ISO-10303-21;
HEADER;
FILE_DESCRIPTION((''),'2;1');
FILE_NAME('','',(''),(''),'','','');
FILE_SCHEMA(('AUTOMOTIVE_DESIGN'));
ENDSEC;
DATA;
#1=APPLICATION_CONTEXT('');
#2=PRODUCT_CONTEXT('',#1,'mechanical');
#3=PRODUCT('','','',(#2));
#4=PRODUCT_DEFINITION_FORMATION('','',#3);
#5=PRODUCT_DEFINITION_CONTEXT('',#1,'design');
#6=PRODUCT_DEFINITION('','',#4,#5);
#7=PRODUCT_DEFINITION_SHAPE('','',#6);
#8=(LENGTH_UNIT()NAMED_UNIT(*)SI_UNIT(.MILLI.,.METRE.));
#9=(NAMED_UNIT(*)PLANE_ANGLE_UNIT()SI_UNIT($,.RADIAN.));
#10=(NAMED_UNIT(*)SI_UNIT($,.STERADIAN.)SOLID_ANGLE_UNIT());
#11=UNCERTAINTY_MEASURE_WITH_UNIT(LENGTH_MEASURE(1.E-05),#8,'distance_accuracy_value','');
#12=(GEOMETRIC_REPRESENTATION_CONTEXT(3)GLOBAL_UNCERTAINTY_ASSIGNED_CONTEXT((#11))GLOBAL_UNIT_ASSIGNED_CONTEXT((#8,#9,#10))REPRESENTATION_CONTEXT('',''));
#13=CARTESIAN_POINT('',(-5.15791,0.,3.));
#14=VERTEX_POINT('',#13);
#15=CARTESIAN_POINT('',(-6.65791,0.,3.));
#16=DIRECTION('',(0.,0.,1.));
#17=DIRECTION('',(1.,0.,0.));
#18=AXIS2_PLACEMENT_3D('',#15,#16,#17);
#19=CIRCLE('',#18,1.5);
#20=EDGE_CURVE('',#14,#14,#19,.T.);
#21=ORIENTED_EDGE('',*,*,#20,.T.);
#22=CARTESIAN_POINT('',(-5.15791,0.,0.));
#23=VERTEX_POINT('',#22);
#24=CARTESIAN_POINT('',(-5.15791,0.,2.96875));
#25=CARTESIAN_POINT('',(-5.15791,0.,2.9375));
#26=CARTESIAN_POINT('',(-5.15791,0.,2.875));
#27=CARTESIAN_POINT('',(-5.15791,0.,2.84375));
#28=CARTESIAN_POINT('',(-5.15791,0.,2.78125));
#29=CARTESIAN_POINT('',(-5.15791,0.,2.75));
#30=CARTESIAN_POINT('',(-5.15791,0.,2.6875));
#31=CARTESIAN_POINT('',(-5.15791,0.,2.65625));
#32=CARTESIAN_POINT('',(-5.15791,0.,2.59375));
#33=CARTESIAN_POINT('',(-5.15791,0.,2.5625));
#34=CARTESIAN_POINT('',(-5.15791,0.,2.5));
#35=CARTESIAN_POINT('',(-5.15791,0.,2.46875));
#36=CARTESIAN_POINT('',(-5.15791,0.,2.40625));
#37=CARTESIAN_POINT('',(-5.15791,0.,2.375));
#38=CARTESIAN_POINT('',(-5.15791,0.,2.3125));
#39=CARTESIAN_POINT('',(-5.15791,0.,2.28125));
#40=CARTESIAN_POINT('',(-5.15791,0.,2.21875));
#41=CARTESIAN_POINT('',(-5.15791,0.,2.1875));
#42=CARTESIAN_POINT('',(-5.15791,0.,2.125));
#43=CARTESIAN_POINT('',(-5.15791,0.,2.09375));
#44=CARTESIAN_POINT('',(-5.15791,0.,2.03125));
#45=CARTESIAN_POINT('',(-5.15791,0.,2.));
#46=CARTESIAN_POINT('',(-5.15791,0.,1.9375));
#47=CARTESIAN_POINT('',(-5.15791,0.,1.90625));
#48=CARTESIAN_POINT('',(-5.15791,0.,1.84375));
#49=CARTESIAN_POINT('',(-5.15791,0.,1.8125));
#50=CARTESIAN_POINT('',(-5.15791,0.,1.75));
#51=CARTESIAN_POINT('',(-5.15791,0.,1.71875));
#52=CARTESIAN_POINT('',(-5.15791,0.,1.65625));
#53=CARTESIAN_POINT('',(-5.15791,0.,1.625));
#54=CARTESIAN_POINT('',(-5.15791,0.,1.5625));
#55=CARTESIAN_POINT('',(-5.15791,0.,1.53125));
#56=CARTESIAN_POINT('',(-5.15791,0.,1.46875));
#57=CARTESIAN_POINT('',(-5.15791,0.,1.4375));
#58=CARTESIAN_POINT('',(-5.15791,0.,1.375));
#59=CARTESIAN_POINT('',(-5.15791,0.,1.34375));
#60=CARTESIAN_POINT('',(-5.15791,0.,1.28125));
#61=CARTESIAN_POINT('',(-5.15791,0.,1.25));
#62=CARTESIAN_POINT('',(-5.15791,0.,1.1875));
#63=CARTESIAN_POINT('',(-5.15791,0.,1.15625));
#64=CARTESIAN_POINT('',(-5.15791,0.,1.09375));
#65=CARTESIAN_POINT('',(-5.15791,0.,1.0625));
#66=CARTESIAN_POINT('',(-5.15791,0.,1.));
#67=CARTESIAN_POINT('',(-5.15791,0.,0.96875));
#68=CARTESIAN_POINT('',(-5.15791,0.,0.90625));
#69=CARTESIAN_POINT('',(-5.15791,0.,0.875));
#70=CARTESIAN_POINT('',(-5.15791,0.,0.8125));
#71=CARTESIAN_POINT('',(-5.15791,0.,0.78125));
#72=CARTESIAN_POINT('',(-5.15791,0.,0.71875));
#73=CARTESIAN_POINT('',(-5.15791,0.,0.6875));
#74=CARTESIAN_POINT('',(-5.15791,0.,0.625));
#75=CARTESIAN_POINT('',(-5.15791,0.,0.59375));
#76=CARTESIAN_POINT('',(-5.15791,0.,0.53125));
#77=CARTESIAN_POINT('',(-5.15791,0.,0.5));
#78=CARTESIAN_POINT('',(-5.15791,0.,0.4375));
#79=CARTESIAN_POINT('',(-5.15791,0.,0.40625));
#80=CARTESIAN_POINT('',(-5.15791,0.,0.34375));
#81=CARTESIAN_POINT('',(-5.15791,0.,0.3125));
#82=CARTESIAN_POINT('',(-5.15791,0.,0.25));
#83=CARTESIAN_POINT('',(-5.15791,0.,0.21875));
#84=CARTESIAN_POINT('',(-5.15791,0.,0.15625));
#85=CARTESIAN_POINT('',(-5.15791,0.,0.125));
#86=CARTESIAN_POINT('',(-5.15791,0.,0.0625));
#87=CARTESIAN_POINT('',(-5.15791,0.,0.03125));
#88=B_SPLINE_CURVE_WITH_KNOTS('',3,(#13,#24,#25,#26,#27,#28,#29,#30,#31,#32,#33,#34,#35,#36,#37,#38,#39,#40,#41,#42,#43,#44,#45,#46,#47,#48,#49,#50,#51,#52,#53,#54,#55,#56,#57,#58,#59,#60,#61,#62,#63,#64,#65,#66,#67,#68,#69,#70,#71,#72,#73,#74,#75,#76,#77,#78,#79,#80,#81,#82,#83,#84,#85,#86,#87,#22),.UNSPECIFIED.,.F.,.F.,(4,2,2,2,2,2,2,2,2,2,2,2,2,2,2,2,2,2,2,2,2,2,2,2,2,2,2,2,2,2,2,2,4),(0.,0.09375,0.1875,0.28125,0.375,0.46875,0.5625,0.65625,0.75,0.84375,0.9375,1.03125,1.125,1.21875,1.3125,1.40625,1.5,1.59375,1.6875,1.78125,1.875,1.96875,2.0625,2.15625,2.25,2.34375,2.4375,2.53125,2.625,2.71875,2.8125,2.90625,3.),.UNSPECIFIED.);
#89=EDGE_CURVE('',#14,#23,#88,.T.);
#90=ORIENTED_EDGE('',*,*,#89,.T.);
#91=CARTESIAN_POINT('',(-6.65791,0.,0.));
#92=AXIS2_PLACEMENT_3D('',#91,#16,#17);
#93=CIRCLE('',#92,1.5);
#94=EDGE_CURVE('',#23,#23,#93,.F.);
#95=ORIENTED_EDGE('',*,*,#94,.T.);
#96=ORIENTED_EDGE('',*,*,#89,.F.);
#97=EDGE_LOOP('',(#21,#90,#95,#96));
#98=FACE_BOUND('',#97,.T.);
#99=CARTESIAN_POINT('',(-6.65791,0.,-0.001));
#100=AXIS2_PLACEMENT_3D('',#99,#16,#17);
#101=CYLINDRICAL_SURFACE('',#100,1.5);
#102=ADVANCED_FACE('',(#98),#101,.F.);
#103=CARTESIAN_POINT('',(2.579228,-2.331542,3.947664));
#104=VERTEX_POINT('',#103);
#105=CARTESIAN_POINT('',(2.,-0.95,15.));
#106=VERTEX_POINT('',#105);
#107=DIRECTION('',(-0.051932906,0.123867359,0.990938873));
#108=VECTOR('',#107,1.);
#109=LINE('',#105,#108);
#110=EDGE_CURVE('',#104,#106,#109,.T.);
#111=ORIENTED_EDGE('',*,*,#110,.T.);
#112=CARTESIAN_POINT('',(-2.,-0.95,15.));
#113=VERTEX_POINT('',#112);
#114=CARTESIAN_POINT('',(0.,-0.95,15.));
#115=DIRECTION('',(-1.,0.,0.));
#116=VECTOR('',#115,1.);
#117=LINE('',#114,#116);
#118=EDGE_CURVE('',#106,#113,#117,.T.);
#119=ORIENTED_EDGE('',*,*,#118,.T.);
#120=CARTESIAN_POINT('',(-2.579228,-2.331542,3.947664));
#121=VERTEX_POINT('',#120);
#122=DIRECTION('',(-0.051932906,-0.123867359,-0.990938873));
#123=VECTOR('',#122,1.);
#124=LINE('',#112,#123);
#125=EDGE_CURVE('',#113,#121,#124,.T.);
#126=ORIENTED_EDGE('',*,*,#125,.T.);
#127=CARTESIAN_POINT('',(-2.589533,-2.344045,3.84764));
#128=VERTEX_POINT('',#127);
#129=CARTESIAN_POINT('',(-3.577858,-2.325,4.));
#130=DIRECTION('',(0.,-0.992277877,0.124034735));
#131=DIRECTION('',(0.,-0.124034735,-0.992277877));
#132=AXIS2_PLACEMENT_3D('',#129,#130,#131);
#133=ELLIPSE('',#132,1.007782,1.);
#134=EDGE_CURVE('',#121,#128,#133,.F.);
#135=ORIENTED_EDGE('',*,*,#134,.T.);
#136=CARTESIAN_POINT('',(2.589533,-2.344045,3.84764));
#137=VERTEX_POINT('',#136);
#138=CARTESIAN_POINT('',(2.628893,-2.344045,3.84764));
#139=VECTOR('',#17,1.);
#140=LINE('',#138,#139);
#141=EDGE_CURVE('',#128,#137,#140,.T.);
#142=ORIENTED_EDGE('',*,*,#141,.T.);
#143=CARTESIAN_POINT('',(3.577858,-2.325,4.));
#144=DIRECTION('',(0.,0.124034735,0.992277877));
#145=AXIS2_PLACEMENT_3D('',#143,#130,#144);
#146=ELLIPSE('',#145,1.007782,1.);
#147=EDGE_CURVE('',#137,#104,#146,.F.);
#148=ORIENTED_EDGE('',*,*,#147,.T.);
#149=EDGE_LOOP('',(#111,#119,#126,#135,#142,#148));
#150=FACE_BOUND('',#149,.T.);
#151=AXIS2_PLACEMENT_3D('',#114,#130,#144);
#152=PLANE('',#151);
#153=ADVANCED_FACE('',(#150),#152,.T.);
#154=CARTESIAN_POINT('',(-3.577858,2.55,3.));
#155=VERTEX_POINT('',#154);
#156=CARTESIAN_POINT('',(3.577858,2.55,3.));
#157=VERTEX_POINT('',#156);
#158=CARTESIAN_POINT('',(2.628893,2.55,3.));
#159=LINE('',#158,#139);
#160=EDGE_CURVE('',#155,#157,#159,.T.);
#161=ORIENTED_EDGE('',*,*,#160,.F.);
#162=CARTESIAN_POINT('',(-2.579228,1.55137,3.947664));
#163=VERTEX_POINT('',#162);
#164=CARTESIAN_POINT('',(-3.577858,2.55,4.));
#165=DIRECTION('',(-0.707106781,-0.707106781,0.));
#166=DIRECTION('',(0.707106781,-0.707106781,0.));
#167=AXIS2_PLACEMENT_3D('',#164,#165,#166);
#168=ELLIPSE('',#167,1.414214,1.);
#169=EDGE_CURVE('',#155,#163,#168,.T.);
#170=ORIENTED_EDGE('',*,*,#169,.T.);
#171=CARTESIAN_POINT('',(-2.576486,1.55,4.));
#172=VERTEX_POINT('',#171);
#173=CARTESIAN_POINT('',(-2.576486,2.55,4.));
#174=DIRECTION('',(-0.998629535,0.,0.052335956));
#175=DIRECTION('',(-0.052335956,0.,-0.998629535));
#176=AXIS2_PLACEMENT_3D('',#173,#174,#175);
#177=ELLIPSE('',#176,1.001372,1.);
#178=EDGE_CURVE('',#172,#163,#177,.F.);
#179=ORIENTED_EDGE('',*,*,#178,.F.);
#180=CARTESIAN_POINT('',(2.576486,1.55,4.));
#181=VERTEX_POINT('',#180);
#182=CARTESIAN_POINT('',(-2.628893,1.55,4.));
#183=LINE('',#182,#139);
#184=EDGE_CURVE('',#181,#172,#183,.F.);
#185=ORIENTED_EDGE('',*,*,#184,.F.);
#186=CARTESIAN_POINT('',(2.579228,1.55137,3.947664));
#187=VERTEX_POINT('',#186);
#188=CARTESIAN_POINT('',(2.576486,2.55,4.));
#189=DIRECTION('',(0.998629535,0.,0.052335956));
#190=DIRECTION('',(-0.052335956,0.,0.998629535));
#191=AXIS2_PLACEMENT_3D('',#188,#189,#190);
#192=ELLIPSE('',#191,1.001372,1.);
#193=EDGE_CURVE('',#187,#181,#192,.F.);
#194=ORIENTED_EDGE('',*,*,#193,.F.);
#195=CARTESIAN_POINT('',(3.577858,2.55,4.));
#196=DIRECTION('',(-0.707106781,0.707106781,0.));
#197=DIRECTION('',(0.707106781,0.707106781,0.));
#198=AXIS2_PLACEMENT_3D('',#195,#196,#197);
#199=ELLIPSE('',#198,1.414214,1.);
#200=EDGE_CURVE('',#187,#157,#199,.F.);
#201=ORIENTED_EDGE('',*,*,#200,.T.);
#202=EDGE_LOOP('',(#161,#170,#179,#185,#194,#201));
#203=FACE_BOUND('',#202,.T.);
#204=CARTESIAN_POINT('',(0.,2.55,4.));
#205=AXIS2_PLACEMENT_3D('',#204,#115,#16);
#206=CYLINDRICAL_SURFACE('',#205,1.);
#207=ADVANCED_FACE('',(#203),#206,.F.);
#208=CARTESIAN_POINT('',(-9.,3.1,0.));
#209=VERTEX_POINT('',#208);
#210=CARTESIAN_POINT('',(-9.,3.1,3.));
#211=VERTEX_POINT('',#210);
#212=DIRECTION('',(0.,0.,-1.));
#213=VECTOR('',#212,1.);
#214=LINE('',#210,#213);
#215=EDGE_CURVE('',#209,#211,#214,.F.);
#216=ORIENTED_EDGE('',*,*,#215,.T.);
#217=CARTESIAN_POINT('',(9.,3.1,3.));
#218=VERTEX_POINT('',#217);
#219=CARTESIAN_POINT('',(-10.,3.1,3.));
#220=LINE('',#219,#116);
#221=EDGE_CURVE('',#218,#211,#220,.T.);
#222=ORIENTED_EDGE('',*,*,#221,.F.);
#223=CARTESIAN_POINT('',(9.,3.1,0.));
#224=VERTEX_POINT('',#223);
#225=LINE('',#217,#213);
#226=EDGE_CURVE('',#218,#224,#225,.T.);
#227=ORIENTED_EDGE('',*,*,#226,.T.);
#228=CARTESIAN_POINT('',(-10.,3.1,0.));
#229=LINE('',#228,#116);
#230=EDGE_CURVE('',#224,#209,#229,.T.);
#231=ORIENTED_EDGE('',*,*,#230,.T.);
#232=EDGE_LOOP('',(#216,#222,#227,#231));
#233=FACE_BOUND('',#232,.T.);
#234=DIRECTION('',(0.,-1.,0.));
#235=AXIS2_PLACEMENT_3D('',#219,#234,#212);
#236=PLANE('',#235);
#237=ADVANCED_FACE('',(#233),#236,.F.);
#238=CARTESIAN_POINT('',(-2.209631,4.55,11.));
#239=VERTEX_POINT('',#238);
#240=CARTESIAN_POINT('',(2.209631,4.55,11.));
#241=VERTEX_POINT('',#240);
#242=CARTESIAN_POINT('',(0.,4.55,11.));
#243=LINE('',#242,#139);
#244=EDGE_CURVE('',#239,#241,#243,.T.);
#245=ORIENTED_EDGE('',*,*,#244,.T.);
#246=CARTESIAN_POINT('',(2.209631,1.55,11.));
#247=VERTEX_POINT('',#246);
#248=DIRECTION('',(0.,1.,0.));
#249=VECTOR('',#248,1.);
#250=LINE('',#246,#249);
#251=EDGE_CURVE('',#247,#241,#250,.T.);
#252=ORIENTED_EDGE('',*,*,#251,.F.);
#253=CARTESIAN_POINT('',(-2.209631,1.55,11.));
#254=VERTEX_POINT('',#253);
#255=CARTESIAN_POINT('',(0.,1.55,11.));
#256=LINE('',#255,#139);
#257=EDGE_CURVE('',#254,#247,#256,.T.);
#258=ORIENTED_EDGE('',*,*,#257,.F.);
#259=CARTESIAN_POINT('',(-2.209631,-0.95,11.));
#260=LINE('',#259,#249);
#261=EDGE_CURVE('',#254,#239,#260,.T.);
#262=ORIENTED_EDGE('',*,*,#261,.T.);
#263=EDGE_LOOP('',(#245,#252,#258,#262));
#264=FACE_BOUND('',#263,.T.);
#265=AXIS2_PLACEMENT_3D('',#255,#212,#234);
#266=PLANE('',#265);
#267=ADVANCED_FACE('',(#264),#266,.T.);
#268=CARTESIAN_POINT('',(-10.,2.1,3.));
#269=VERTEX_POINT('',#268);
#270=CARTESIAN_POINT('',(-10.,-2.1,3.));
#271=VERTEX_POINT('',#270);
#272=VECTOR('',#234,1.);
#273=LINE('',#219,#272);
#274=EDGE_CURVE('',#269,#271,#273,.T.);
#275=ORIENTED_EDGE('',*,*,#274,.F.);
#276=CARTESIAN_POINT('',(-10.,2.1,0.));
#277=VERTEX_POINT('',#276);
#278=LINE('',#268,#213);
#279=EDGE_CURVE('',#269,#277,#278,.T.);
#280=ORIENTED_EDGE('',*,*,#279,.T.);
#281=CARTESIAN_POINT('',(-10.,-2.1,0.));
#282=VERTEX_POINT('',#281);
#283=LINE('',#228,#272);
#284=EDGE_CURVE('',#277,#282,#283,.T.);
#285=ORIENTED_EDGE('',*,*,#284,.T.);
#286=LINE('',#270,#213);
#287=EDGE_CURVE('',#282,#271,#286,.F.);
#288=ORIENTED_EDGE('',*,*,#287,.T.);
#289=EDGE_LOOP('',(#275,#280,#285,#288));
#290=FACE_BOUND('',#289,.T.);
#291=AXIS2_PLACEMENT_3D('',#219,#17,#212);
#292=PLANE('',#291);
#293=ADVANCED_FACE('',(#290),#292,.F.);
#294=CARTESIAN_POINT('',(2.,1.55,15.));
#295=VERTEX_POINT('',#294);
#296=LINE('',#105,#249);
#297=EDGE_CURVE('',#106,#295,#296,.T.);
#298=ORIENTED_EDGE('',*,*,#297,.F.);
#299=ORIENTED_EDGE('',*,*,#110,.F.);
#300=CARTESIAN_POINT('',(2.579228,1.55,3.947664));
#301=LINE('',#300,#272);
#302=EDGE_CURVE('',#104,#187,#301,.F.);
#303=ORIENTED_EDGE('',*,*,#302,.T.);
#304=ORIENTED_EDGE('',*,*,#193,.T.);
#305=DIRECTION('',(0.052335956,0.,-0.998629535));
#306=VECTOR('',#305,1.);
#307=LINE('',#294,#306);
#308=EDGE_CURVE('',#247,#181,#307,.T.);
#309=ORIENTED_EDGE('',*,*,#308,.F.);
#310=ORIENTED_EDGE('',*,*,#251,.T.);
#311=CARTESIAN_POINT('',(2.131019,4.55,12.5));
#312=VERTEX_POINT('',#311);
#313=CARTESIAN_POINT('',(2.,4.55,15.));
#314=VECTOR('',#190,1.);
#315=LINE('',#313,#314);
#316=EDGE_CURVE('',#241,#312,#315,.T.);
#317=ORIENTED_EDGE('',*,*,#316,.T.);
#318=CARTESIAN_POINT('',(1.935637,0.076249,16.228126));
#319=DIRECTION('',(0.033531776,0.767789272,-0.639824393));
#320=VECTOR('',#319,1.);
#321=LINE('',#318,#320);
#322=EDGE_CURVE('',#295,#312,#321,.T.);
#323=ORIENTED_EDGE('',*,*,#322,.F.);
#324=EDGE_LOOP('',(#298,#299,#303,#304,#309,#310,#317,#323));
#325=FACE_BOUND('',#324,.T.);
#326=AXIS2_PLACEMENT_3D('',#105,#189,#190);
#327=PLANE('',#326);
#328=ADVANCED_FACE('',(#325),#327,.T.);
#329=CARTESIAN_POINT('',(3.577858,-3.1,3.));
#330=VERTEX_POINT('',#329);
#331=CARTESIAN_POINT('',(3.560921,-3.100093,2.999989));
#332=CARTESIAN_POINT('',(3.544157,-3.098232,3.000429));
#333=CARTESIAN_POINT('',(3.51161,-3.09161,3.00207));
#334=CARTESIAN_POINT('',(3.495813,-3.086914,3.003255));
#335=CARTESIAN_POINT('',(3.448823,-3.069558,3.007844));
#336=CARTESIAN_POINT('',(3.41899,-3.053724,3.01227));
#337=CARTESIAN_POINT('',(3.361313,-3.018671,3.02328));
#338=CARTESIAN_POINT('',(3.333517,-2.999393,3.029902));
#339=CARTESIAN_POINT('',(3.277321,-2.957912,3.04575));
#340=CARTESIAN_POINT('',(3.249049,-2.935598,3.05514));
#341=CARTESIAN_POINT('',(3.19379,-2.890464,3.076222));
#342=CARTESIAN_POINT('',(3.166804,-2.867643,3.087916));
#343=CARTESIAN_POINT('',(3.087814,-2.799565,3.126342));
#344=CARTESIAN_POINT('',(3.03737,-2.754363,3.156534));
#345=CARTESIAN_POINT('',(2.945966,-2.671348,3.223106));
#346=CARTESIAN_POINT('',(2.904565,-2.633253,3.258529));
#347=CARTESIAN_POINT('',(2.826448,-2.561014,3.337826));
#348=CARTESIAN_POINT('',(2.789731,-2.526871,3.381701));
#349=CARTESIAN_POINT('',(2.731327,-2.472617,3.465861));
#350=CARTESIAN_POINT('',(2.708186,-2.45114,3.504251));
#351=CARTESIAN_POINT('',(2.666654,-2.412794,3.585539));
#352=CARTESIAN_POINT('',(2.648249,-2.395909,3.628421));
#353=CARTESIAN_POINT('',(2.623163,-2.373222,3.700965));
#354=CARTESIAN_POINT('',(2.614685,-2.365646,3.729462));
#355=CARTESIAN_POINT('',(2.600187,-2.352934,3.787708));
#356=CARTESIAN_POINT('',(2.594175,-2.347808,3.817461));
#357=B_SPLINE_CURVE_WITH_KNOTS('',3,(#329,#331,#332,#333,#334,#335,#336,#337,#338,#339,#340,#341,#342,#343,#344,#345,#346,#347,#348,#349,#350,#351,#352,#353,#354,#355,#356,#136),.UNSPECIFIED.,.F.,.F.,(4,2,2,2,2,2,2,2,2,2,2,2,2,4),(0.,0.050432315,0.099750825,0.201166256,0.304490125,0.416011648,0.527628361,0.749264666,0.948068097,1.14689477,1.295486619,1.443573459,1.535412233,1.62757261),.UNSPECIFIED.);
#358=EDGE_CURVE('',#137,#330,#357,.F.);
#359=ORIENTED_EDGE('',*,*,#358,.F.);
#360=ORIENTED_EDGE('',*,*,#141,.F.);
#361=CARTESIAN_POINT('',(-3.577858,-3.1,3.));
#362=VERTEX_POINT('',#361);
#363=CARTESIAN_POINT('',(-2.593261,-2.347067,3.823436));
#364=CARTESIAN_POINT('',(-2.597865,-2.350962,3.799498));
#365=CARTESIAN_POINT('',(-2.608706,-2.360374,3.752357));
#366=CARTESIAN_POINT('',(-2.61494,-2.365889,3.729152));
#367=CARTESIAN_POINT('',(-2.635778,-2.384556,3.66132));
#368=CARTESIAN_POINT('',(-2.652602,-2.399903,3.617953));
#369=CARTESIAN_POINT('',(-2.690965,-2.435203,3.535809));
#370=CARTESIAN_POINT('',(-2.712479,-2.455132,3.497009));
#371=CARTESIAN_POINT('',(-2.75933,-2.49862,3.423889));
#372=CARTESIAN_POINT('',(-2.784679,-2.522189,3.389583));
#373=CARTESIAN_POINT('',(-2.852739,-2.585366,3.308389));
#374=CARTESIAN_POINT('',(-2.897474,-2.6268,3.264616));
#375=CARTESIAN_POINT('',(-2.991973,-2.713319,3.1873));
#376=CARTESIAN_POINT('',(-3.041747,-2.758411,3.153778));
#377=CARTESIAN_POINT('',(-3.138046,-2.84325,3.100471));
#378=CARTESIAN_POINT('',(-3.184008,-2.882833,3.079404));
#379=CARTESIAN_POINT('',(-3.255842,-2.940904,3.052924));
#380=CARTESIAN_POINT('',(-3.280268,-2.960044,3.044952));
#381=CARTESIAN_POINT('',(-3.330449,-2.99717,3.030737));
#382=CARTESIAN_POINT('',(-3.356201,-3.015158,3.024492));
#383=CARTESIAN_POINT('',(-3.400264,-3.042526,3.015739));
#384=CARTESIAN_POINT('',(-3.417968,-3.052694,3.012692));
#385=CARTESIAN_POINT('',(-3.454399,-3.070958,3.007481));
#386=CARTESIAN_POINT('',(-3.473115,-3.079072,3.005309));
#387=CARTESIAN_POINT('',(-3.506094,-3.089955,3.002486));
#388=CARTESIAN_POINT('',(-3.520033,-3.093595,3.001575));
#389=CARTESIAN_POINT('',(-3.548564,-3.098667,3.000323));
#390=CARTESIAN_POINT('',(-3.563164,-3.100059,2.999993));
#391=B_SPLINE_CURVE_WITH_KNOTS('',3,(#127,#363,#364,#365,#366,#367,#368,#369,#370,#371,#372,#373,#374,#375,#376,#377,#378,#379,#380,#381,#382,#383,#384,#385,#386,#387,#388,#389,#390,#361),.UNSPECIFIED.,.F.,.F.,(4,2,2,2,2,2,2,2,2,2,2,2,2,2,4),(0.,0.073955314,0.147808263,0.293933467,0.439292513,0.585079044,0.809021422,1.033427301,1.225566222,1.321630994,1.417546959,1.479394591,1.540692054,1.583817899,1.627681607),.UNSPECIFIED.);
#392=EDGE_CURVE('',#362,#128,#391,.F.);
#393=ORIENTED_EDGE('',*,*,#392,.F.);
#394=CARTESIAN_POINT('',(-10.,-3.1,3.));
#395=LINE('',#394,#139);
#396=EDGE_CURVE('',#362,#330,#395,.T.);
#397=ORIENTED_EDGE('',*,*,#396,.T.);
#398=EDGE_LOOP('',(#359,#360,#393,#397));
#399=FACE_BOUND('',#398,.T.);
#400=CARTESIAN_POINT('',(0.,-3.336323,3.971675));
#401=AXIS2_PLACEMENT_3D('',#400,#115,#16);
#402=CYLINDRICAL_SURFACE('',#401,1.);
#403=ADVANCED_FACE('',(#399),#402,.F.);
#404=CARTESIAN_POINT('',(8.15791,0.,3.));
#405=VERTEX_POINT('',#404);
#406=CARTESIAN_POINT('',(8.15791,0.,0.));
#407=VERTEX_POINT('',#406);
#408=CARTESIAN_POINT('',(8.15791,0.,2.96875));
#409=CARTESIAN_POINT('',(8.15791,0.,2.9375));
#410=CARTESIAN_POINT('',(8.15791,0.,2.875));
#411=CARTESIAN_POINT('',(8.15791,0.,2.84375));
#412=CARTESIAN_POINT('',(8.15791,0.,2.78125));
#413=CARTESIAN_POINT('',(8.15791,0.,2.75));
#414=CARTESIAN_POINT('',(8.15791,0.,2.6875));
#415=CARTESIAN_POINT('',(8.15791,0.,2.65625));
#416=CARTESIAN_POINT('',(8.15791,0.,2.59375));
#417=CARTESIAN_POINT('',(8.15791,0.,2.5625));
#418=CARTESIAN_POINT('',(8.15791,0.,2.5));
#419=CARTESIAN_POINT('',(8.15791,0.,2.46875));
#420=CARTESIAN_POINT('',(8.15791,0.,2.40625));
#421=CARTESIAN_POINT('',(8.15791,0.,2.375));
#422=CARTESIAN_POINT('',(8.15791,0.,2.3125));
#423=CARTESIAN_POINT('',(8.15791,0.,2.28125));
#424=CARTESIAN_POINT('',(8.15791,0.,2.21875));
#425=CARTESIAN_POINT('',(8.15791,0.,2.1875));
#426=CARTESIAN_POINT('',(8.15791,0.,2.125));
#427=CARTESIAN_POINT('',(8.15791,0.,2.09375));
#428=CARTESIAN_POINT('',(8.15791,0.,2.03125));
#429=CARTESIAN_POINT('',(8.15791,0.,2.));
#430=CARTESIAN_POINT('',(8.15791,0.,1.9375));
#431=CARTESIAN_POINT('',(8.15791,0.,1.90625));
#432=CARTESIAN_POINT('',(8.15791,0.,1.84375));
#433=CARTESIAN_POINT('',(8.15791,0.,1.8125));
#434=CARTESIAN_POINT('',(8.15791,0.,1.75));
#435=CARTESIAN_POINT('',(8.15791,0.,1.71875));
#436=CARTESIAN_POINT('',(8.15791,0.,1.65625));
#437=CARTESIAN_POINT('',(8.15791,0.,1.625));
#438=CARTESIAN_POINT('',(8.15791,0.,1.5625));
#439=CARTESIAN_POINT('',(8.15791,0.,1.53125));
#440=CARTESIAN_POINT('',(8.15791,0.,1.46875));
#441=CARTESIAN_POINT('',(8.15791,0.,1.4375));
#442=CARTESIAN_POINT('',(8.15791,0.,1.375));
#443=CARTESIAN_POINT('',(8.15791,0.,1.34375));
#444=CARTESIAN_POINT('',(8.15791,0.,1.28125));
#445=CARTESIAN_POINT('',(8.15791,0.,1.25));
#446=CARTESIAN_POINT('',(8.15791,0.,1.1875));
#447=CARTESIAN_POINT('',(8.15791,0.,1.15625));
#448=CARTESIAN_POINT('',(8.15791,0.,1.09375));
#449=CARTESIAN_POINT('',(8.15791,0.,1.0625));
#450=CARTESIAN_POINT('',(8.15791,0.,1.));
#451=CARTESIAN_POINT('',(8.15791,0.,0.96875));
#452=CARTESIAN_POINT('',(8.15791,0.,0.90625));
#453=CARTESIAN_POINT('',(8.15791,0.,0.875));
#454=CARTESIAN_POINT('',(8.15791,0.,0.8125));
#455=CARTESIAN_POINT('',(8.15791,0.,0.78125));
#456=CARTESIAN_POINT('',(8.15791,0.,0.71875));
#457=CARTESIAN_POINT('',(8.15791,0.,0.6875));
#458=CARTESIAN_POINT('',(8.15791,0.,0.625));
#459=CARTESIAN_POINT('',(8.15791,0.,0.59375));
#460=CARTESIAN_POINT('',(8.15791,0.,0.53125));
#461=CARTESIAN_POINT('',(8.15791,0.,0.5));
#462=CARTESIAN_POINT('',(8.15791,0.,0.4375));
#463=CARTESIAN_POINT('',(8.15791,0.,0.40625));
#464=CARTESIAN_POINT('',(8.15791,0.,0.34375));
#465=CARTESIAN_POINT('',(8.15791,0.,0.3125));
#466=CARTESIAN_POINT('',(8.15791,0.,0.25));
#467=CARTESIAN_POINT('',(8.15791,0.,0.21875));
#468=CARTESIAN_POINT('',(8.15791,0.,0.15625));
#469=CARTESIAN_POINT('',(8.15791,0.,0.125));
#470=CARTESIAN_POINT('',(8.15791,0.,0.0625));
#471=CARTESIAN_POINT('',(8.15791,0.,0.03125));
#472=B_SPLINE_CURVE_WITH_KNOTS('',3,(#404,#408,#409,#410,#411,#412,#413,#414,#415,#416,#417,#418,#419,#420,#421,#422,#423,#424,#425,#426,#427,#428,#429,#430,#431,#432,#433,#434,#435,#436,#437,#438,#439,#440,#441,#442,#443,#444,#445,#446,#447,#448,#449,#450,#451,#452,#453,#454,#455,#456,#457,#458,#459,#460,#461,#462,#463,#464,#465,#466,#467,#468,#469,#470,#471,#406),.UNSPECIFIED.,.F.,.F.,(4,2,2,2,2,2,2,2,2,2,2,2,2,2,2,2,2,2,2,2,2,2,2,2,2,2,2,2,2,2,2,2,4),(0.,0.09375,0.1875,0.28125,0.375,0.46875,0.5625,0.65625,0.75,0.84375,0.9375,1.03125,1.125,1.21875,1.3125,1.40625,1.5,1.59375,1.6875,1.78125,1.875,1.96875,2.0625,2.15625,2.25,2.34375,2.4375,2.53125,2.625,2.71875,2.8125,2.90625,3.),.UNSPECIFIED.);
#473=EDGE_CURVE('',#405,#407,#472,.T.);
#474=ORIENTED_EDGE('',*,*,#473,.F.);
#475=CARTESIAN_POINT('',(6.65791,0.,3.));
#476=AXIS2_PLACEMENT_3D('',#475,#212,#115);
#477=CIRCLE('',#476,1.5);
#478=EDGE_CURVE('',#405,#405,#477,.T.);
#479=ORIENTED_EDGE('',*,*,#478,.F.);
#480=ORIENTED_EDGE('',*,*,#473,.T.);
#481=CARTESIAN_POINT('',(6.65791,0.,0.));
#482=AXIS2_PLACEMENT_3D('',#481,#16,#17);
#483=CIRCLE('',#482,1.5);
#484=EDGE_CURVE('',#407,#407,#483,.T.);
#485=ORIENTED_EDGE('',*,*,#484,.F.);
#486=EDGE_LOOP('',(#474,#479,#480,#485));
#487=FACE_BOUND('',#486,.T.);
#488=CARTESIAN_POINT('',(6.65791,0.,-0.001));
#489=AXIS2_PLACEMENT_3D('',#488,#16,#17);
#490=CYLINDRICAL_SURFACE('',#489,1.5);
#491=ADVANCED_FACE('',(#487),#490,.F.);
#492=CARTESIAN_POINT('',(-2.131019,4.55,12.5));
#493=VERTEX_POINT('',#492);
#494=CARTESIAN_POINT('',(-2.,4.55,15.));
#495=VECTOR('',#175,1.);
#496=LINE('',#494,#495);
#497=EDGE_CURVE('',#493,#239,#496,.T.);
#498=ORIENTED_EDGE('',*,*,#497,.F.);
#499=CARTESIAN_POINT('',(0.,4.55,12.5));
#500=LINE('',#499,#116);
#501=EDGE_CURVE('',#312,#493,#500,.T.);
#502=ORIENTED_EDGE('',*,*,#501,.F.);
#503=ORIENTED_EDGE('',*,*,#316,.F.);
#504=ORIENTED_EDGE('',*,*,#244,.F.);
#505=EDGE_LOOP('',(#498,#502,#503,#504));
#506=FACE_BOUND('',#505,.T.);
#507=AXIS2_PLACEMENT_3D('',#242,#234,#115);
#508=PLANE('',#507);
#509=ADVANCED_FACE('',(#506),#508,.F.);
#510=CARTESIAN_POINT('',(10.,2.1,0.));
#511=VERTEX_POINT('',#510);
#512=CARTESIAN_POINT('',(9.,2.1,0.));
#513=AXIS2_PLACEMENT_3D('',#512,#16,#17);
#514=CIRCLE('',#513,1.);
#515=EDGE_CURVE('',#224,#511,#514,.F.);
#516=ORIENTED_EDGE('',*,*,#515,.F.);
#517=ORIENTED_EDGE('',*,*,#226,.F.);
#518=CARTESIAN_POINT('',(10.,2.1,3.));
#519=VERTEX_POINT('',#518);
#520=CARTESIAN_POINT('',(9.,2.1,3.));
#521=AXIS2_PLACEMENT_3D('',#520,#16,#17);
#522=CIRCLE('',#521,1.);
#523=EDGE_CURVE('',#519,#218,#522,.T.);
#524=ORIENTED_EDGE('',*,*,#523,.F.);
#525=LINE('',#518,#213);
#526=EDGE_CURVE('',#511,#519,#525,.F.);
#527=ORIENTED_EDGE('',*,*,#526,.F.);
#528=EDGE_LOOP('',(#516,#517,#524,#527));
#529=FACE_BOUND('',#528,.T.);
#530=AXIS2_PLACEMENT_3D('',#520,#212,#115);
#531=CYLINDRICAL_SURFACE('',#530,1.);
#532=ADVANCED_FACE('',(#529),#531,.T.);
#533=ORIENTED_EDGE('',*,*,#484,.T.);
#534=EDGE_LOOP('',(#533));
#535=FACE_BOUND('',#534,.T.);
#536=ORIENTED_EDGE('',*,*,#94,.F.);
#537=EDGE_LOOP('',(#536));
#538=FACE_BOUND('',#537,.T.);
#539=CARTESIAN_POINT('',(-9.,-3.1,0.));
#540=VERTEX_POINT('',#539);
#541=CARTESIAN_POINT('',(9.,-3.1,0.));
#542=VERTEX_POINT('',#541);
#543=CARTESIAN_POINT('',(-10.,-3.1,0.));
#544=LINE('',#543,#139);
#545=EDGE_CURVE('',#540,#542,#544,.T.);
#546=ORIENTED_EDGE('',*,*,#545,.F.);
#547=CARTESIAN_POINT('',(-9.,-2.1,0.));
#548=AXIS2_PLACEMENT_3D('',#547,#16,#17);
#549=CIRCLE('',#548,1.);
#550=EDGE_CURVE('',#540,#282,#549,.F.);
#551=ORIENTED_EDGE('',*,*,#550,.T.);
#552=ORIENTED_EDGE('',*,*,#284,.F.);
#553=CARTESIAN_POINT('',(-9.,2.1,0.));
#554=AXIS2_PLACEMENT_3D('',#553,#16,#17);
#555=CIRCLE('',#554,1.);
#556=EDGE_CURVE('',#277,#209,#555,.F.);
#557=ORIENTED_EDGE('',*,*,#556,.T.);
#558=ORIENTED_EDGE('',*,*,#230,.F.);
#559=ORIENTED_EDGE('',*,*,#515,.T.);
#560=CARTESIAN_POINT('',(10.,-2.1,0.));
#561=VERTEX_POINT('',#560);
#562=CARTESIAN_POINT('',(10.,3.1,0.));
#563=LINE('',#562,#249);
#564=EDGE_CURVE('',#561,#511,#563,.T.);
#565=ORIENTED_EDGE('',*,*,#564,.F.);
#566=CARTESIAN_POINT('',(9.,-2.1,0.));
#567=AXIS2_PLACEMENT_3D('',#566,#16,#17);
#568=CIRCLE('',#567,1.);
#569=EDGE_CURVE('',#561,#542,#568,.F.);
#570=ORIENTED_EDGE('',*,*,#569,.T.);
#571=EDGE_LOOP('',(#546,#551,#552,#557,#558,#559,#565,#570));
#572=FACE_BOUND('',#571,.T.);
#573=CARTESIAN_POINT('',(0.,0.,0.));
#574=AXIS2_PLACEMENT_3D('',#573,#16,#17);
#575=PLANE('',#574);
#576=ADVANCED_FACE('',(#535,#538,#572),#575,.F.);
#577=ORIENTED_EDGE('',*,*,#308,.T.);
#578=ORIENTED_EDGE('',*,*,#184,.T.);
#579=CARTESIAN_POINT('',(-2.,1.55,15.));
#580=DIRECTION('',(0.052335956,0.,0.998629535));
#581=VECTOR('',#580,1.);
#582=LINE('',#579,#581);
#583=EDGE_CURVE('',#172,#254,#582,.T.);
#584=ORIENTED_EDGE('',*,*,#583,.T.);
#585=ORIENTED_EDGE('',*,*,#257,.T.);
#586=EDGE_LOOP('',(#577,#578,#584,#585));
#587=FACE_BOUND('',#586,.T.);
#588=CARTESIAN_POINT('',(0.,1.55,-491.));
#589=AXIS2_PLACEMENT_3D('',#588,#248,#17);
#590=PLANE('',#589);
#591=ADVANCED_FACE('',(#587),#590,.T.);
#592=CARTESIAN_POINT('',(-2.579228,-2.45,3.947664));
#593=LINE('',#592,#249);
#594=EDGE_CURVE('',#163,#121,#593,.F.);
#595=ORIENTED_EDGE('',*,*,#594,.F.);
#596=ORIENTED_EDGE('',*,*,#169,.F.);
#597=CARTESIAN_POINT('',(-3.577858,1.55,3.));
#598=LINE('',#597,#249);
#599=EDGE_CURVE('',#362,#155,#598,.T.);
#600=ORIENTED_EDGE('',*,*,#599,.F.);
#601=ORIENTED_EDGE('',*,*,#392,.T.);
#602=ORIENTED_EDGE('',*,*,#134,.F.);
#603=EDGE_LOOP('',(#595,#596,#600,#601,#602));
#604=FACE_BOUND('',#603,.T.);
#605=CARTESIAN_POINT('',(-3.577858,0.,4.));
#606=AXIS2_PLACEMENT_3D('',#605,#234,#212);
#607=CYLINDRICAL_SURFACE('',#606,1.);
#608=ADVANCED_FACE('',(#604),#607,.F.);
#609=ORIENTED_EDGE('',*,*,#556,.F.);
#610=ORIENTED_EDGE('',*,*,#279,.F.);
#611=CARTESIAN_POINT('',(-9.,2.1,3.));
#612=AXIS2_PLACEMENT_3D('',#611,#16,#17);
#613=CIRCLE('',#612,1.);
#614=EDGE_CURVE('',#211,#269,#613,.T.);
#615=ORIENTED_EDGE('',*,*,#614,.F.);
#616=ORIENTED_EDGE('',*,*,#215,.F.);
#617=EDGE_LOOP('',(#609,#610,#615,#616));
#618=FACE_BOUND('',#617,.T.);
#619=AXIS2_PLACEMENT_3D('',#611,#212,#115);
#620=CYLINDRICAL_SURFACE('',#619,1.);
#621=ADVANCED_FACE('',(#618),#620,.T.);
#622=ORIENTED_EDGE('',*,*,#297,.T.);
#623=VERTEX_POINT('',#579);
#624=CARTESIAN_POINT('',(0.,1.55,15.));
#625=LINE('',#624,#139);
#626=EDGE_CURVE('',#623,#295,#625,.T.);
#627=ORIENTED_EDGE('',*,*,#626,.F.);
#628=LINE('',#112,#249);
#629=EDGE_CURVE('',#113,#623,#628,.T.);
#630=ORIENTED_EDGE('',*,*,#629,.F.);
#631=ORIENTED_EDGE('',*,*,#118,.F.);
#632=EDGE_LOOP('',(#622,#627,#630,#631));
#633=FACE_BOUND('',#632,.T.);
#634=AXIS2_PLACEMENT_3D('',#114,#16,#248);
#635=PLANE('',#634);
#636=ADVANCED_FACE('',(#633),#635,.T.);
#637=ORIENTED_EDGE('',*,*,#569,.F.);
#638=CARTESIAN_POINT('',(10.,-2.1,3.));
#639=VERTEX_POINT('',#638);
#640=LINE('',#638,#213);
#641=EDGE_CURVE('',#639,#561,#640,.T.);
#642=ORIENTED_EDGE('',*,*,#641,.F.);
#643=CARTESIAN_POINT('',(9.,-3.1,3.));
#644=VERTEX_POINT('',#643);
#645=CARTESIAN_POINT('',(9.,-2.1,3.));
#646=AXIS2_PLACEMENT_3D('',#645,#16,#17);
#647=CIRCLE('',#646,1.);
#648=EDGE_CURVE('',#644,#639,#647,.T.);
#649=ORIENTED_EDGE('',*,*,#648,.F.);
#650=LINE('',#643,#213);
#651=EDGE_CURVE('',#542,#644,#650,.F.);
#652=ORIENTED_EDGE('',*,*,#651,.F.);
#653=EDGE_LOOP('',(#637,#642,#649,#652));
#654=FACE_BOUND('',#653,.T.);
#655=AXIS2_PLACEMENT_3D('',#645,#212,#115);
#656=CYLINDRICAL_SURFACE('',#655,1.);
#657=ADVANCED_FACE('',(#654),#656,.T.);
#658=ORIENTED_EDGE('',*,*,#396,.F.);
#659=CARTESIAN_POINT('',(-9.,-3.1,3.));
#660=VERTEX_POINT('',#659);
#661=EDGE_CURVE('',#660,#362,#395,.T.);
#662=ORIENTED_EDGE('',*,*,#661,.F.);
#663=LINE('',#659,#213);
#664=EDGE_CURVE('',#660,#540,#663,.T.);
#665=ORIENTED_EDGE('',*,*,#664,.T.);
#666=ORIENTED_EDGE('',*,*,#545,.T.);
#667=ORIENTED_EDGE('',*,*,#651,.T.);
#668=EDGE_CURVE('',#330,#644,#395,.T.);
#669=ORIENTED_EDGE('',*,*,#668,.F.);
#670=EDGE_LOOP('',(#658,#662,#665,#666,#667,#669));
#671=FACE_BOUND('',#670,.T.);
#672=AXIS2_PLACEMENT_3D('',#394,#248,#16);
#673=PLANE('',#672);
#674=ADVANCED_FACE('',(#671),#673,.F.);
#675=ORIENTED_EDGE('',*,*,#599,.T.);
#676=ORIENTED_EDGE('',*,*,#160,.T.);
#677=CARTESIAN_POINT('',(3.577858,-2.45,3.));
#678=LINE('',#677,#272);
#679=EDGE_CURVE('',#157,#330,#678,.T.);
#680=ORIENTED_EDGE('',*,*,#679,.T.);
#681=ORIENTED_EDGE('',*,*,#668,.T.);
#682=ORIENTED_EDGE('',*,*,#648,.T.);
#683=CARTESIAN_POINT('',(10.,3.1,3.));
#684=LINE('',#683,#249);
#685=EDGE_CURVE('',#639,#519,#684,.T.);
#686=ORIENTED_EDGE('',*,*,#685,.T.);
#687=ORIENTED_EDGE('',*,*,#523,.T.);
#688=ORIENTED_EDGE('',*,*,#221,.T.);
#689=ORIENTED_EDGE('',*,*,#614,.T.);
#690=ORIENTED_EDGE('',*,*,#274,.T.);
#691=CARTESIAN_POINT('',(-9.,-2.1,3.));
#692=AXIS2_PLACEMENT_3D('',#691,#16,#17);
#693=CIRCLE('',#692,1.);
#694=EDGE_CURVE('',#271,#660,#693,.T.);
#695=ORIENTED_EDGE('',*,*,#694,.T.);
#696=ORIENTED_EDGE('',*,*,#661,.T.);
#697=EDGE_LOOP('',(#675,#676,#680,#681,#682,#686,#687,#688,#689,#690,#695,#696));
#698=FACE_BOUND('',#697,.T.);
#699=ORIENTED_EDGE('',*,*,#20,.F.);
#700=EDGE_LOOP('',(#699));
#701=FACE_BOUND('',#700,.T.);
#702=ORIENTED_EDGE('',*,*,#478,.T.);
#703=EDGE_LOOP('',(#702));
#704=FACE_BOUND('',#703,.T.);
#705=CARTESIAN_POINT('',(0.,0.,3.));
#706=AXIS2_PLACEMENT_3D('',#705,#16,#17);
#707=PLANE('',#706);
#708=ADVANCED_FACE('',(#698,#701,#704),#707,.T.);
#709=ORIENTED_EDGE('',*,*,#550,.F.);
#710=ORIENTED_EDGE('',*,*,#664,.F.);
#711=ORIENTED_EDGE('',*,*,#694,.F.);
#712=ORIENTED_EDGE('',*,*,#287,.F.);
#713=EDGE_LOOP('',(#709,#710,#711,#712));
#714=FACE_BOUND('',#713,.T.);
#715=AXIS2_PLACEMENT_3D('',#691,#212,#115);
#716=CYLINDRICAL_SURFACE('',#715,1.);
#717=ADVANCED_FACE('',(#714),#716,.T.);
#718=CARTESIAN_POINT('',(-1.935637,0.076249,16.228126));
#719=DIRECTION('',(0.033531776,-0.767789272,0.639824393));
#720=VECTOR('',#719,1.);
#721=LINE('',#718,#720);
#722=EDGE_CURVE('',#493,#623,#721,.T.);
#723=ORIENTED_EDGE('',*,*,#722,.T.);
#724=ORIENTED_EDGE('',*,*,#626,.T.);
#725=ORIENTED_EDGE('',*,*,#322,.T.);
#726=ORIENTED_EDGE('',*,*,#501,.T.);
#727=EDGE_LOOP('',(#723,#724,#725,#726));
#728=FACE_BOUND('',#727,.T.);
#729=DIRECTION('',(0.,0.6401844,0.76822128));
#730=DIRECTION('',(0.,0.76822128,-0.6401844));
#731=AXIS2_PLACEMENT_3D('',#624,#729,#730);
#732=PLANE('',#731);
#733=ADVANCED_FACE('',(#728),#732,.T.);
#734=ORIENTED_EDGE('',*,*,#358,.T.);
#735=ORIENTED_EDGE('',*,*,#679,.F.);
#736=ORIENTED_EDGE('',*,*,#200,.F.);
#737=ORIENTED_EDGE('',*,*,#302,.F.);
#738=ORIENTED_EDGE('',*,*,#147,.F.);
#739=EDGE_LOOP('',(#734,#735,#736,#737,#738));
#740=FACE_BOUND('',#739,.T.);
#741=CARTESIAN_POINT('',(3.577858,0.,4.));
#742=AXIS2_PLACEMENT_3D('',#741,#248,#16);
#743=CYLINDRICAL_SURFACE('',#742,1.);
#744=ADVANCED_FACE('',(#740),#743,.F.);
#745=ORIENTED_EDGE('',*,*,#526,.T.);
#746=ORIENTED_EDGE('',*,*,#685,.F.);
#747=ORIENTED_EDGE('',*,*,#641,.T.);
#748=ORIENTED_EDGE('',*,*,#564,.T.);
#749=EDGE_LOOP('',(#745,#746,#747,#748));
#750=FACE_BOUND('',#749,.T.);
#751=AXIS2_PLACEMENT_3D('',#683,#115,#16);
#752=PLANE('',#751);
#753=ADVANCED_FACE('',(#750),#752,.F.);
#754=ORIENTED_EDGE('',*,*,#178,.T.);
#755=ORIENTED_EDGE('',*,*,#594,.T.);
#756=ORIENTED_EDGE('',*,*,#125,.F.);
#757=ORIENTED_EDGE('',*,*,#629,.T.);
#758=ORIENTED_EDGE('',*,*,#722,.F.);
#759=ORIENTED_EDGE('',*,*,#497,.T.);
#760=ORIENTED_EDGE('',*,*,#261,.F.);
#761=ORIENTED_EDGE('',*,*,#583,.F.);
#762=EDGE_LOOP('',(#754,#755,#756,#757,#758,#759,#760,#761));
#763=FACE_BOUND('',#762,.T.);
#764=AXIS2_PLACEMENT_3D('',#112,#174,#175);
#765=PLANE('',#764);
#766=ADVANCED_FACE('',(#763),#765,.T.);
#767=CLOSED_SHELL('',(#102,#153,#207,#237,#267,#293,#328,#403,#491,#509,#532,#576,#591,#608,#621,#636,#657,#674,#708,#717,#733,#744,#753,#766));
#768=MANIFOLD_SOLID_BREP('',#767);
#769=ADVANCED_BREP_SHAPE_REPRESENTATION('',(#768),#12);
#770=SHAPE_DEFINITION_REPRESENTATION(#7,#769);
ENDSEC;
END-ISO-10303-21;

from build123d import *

# Parameters (mm, degrees)
SKETCH1_W           = 20
SKETCH1_H           = 6.2
BOSS_EXTRUDE1_DEPTH = 3
SNAP_START          = -0.95
SNAP_HOOK1_DEPTH    = 2.5
SNAP_START_2        = -1.274844
SNAP_HOOK1_2_DEPTH  = 2.48
SNAP_START_3        = -2.209631117
SNAP_HOOK1_3_DEPTH  = 4.419262234
SNAP_START_4        = -2.628893351
SNAP_HOOK1_4_DEPTH  = 5.257786702
SNAP_START_5        = -3
SNAP_HOOK1_5_DEPTH  = 9
FILLET1_R           = 1
CUT_EXTRUDE1_REACH  = 18.27
SKETCH3_R           = 1.5
FILLET2_R           = 1


with BuildPart() as part:
    # Sketch1 → Boss-Extrude1 (new body)
    with BuildSketch(Plane.XY):
        Rectangle(SKETCH1_W, SKETCH1_H)
    extrude(amount=BOSS_EXTRUDE1_DEPTH)

    # Snap Hook1: read off the stored shape, not the designer's step
    # Snap Hook1 outline → Snap Hook1 (add)
    with BuildSketch(Plane(origin=(0, 0, 0), x_dir=(1, 0, 0), z_dir=(0, 1, 0)).offset(SNAP_START)):
        Polygon((2.628893351, -3), (-2.628893351, -3), (-2, -15), (2, -15), align=None)
    extrude(amount=SNAP_HOOK1_DEPTH)

    # Snap Hook1 2 outline → Snap Hook1 2 (add)
    with BuildSketch(Plane(origin=(0, 0, 0), x_dir=(1, 0, 0), z_dir=(0, 1, 0)).offset(SNAP_START_2)):
        Polygon((2.628893351, -3), (-2.628893351, -3), (-2.209631117, -11), (2.209631117, -11), align=None)
    extrude(amount=SNAP_HOOK1_2_DEPTH)

    # Snap Hook1 3 outline → Snap Hook1 3 (add)
    with BuildSketch(Plane.YZ.offset(SNAP_START_3)):
        Polygon((-0.95, 11), (-0.95, 15), (-2.45, 3), (-1.274844, 3), (-1.274844, 11), align=None)
        Polygon((1.55, 15), (1.55, 11), (4.55, 11), (4.55, 12.5), align=None)
    extrude(amount=SNAP_HOOK1_3_DEPTH)

    # Snap Hook1 4 outline → Snap Hook1 4 (add)
    with BuildSketch(Plane.YZ.offset(SNAP_START_4)):
        Polygon((-0.95, 11), (-0.95, 15), (-2.45, 3), (-1.274844, 3), (-1.274844, 11), align=None)
    extrude(amount=SNAP_HOOK1_4_DEPTH)

    # Snap Hook1 5 outline → Snap Hook1 5 (cut)
    with BuildSketch(Plane(origin=(0, 0, 0), x_dir=(1, 0, 0), z_dir=(0, 1, 0)).offset(SNAP_START_5)):
        Polygon((-2.628893351, -3), (-2.628893351, -16), (-1.947592221, -16), (-2, -15), align=None)
        Polygon((2, -15), (1.947592221, -16), (2.628893351, -16), (2.628893351, -3), align=None)
    extrude(amount=SNAP_HOOK1_5_DEPTH, mode=Mode.SUBTRACT)

    # Fillet1
    # the kernel refuses this fillet: 1 mm, written as the material it adds along each edge
    with BuildSketch(Plane(origin=(5.128893351, 1.55, 3), x_dir=(0, 1, 0), z_dir=(-1, 0, 0))) as fillet1_piece_1_section:
        with BuildLine():
            CenterArc((FILLET1_R, -FILLET1_R), FILLET1_R, 90, 90)
            Line((0, -FILLET1_R), (-FILLET1_R * 0.02, -FILLET1_R))
            Line((-FILLET1_R * 0.02, -FILLET1_R), (-FILLET1_R * 0.02, FILLET1_R * 0.02))
            Line((-FILLET1_R * 0.02, FILLET1_R * 0.02), (FILLET1_R, FILLET1_R * 0.02))
            Line((FILLET1_R, FILLET1_R * 0.02), (FILLET1_R, 0))
        make_face()
    fillet1_piece_1 = extrude(amount=10.257786702, mode=Mode.PRIVATE)
    fillet1_piece_1 = split(fillet1_piece_1, bisect_by=Plane(origin=(-2.607644367, 1.55, 3.405454761), z_dir=(0.9986295347562985, 0, -0.05233595621003828)), keep=Keep.TOP, mode=Mode.PRIVATE)
    fillet1_piece_1 = split(fillet1_piece_1, bisect_by=Plane(origin=(2.635740982, 1.55, 2.869339421), z_dir=(-0.9986295347562985, 0, -0.0523359562100383)), keep=Keep.TOP, mode=Mode.PRIVATE)
    add(fillet1_piece_1)
    with BuildSketch(Plane(origin=(2.628893351, 1.55, 3), x_dir=(1, 0, 0), z_dir=(0, -1, 0))) as fillet1_piece_2_section:
        with BuildLine():
            CenterArc((FILLET1_R * 0.948964566746, FILLET1_R), FILLET1_R, 182.999999998, 87.000000002)
            Line((-FILLET1_R * 0.0496649680101, FILLET1_R * 0.94766404379), (-FILLET1_R * 0.0696375587052, FILLET1_R * 0.946617324666))
            Line((-FILLET1_R * 0.0696375587052, FILLET1_R * 0.946617324666), (-FILLET1_R * 0.0189792913349, -FILLET1_R * 0.02))
            Line((-FILLET1_R * 0.0189792913349, -FILLET1_R * 0.02), (FILLET1_R * 0.948964566746, -FILLET1_R * 0.02))
            Line((FILLET1_R * 0.948964566746, -FILLET1_R * 0.02), (FILLET1_R * 0.948964566746, 0))
        make_face()
    fillet1_piece_2 = extrude(amount=6.372411417, mode=Mode.PRIVATE)
    fillet1_piece_2 = split(fillet1_piece_2, bisect_by=Plane(origin=(2.628893351, -2.388461538, 3.492307692), z_dir=(0, 0.9922778767136677, -0.12403473458920848)), keep=Keep.TOP, mode=Mode.PRIVATE)
    add(fillet1_piece_2)
    with BuildSketch(Plane(origin=(4.76448426, -2.45, 3), x_dir=(0, -1, 0), z_dir=(-1, 0, 0))) as fillet1_piece_3_section:
        with BuildLine():
            CenterArc((0.886322896, 0.97167458), FILLET1_R, 187.125016349, 69.205367851)
            Line((-0.105954981, 0.847639845), (-0.125800538, 0.84515915))
            Line((-0.125800538, 0.84515915), (-0.019845558, -0.002480695))
            Line((-0.019845558, -0.002480695), (0, -0.02))
            ThreePointArc((0, -0.02), (0.325, -0.02), (0.645273542, -0.019433492))
            Line((0.645273542, -0.019433492), (0.65, 0))
        make_face()
    fillet1_piece_3 = extrude(amount=9.52896852, mode=Mode.PRIVATE)
    fillet1_piece_3 = split(fillet1_piece_3, bisect_by=Plane(origin=(2.634742846, -2.45, 2.888384982), z_dir=(-0.9986295347562985, 0, -0.0523359562100383)), keep=Keep.TOP, mode=Mode.PRIVATE)
    fillet1_piece_3 = split(fillet1_piece_3, bisect_by=Plane(origin=(-2.608642503, -2.45, 3.3864092), z_dir=(0.9986295347562985, 0, -0.05233595621003828)), keep=Keep.TOP, mode=Mode.PRIVATE)
    add(fillet1_piece_3)
    with BuildSketch(Plane(origin=(-2.628893351, -4.822411417, 3), x_dir=(-1, 0, 0), z_dir=(0, 1, 0))) as fillet1_piece_4_section:
        with BuildLine():
            CenterArc((FILLET1_R * 0.948964566746, FILLET1_R), FILLET1_R, 182.999999998, 87.000000002)
            Line((-FILLET1_R * 0.0496649680101, FILLET1_R * 0.94766404379), (-FILLET1_R * 0.0696375587052, FILLET1_R * 0.946617324666))
            Line((-FILLET1_R * 0.0696375587052, FILLET1_R * 0.946617324666), (-FILLET1_R * 0.0189792913349, -FILLET1_R * 0.02))
            Line((-FILLET1_R * 0.0189792913349, -FILLET1_R * 0.02), (FILLET1_R * 0.948964566746, -FILLET1_R * 0.02))
            Line((FILLET1_R * 0.948964566746, -FILLET1_R * 0.02), (FILLET1_R * 0.948964566746, 0))
        make_face()
    fillet1_piece_4 = extrude(amount=6.372411417, mode=Mode.PRIVATE)
    fillet1_piece_4 = split(fillet1_piece_4, bisect_by=Plane(origin=(-2.628893351, -2.486498637, 2.708010903), z_dir=(0, 0.9922778767136677, -0.12403473458920848)), keep=Keep.TOP, mode=Mode.PRIVATE)
    add(fillet1_piece_4)
    with BuildSketch(Plane(origin=(2.628893351, 3.922411417, 3), x_dir=(1, 0, 0), z_dir=(0, -1, 0))) as fillet1_piece_5a_section:
        with BuildLine():
            CenterArc((FILLET1_R * 0.948964566746, FILLET1_R), FILLET1_R, 182.999999998, 87.000000002)
            Line((-FILLET1_R * 0.0496649680101, FILLET1_R * 0.94766404379), (-FILLET1_R * 0.0696375587052, FILLET1_R * 0.946617324666))
            Line((-FILLET1_R * 0.0696375587052, FILLET1_R * 0.946617324666), (-FILLET1_R * 0.0189792913349, -FILLET1_R * 0.02))
            Line((-FILLET1_R * 0.0189792913349, -FILLET1_R * 0.02), (FILLET1_R * 0.948964566746, -FILLET1_R * 0.02))
            Line((FILLET1_R * 0.948964566746, -FILLET1_R * 0.02), (FILLET1_R * 0.948964566746, 0))
        make_face()
    fillet1_piece_5a = extrude(amount=8.744822834, mode=Mode.PRIVATE)
    fillet1_piece_5a = split(fillet1_piece_5a, bisect_by=Plane(origin=(2.628893351, 3.1, 3), z_dir=(0, -1, 0)), keep=Keep.TOP, mode=Mode.PRIVATE)
    fillet1_piece_5a = split(fillet1_piece_5a, bisect_by=Plane(origin=(2.628893351, 1.55, 3), z_dir=(0, 1, 0)), keep=Keep.TOP, mode=Mode.PRIVATE)
    with BuildSketch(Plane(origin=(5.128893351, 1.55, 3), x_dir=(0, 1, 0), z_dir=(-1, 0, 0))) as fillet1_piece_5b_section:
        with BuildLine():
            CenterArc((FILLET1_R, -FILLET1_R), FILLET1_R, 90, 90)
            Line((0, -FILLET1_R), (-FILLET1_R * 0.02, -FILLET1_R))
            Line((-FILLET1_R * 0.02, -FILLET1_R), (-FILLET1_R * 0.02, FILLET1_R * 0.02))
            Line((-FILLET1_R * 0.02, FILLET1_R * 0.02), (FILLET1_R, FILLET1_R * 0.02))
            Line((FILLET1_R, FILLET1_R * 0.02), (FILLET1_R, 0))
        make_face()
    fillet1_piece_5b = extrude(amount=10.257786702, mode=Mode.PRIVATE)
    fillet1_piece_5b = split(fillet1_piece_5b, bisect_by=Plane(origin=(2.635740982, 1.55, 2.869339421), z_dir=(0.9986295347562985, 0, 0.0523359562100383)), keep=Keep.TOP, mode=Mode.PRIVATE)
    fillet1_piece_5 = fillet1_piece_5a & fillet1_piece_5b
    add(fillet1_piece_5)
    with BuildSketch(Plane(origin=(5.128893351, 1.55, 3), x_dir=(0, 1, 0), z_dir=(-1, 0, 0))) as fillet1_piece_6a_section:
        with BuildLine():
            CenterArc((FILLET1_R, -FILLET1_R), FILLET1_R, 90, 90)
            Line((0, -FILLET1_R), (-FILLET1_R * 0.02, -FILLET1_R))
            Line((-FILLET1_R * 0.02, -FILLET1_R), (-FILLET1_R * 0.02, FILLET1_R * 0.02))
            Line((-FILLET1_R * 0.02, FILLET1_R * 0.02), (FILLET1_R, FILLET1_R * 0.02))
            Line((FILLET1_R, FILLET1_R * 0.02), (FILLET1_R, 0))
        make_face()
    fillet1_piece_6a = extrude(amount=10.257786702, mode=Mode.PRIVATE)
    fillet1_piece_6a = split(fillet1_piece_6a, bisect_by=Plane(origin=(-2.607644367, 1.55, 3.405454761), z_dir=(-0.9986295347562985, 0, 0.05233595621003828)), keep=Keep.TOP, mode=Mode.PRIVATE)
    with BuildSketch(Plane(origin=(-2.628893351, -4.822411417, 3), x_dir=(-1, 0, 0), z_dir=(0, 1, 0))) as fillet1_piece_6b_section:
        with BuildLine():
            CenterArc((FILLET1_R * 0.948964566746, FILLET1_R), FILLET1_R, 182.999999998, 87.000000002)
            Line((-FILLET1_R * 0.0496649680101, FILLET1_R * 0.94766404379), (-FILLET1_R * 0.0696375587052, FILLET1_R * 0.946617324666))
            Line((-FILLET1_R * 0.0696375587052, FILLET1_R * 0.946617324666), (-FILLET1_R * 0.0189792913349, -FILLET1_R * 0.02))
            Line((-FILLET1_R * 0.0189792913349, -FILLET1_R * 0.02), (FILLET1_R * 0.948964566746, -FILLET1_R * 0.02))
            Line((FILLET1_R * 0.948964566746, -FILLET1_R * 0.02), (FILLET1_R * 0.948964566746, 0))
        make_face()
    fillet1_piece_6b = extrude(amount=8.744822834, mode=Mode.PRIVATE)
    fillet1_piece_6b = split(fillet1_piece_6b, bisect_by=Plane(origin=(-2.628893351, 3.1, 3), z_dir=(0, -1, 0)), keep=Keep.TOP, mode=Mode.PRIVATE)
    fillet1_piece_6b = split(fillet1_piece_6b, bisect_by=Plane(origin=(-2.628893351, 1.55, 3), z_dir=(0, 1, 0)), keep=Keep.TOP, mode=Mode.PRIVATE)
    fillet1_piece_6 = fillet1_piece_6a & fillet1_piece_6b
    add(fillet1_piece_6)
    with BuildSketch(Plane(origin=(2.628893351, 1.55, 3), x_dir=(1, 0, 0), z_dir=(0, -1, 0))) as fillet1_piece_7a_section:
        with BuildLine():
            CenterArc((FILLET1_R * 0.948964566746, FILLET1_R), FILLET1_R, 182.999999998, 87.000000002)
            Line((-FILLET1_R * 0.0496649680101, FILLET1_R * 0.94766404379), (-FILLET1_R * 0.0696375587052, FILLET1_R * 0.946617324666))
            Line((-FILLET1_R * 0.0696375587052, FILLET1_R * 0.946617324666), (-FILLET1_R * 0.0189792913349, -FILLET1_R * 0.02))
            Line((-FILLET1_R * 0.0189792913349, -FILLET1_R * 0.02), (FILLET1_R * 0.948964566746, -FILLET1_R * 0.02))
            Line((FILLET1_R * 0.948964566746, -FILLET1_R * 0.02), (FILLET1_R * 0.948964566746, 0))
        make_face()
    fillet1_piece_7a = extrude(amount=6.372411417, mode=Mode.PRIVATE)
    fillet1_piece_7a = split(fillet1_piece_7a, bisect_by=Plane(origin=(2.628893351, -3.1, 3), z_dir=(0, 1, 0)), keep=Keep.TOP, mode=Mode.PRIVATE)
    fillet1_piece_7a = split(fillet1_piece_7a, bisect_by=Plane(origin=(2.628893351, -2.388461538, 3.492307692), z_dir=(0, -0.9922778767136677, 0.12403473458920848)), keep=Keep.TOP, mode=Mode.PRIVATE)
    with BuildSketch(Plane(origin=(4.76448426, -2.45, 3), x_dir=(0, -1, 0), z_dir=(-1, 0, 0))) as fillet1_piece_7b_section:
        with BuildLine():
            CenterArc((0.886322896, 0.97167458), FILLET1_R, 187.125016349, 69.205367851)
            Line((-0.105954981, 0.847639845), (-0.125800538, 0.84515915))
            Line((-0.125800538, 0.84515915), (-0.019845558, -0.002480695))
            Line((-0.019845558, -0.002480695), (0, -0.02))
            ThreePointArc((0, -0.02), (0.325, -0.02), (0.645273542, -0.019433492))
            Line((0.645273542, -0.019433492), (0.65, 0))
        make_face()
    fillet1_piece_7b = extrude(amount=9.52896852, mode=Mode.PRIVATE)
    fillet1_piece_7b = split(fillet1_piece_7b, bisect_by=Plane(origin=(2.634742846, -2.45, 2.888384982), z_dir=(0.9986295347562985, 0, 0.0523359562100383)), keep=Keep.TOP, mode=Mode.PRIVATE)
    fillet1_piece_7 = fillet1_piece_7a & fillet1_piece_7b
    add(fillet1_piece_7)
    with BuildSketch(Plane(origin=(-2.628893351, -4.822411417, 3), x_dir=(-1, 0, 0), z_dir=(0, 1, 0))) as fillet1_piece_8a_section:
        with BuildLine():
            CenterArc((FILLET1_R * 0.948964566746, FILLET1_R), FILLET1_R, 182.999999998, 87.000000002)
            Line((-FILLET1_R * 0.0496649680101, FILLET1_R * 0.94766404379), (-FILLET1_R * 0.0696375587052, FILLET1_R * 0.946617324666))
            Line((-FILLET1_R * 0.0696375587052, FILLET1_R * 0.946617324666), (-FILLET1_R * 0.0189792913349, -FILLET1_R * 0.02))
            Line((-FILLET1_R * 0.0189792913349, -FILLET1_R * 0.02), (FILLET1_R * 0.948964566746, -FILLET1_R * 0.02))
            Line((FILLET1_R * 0.948964566746, -FILLET1_R * 0.02), (FILLET1_R * 0.948964566746, 0))
        make_face()
    fillet1_piece_8a = extrude(amount=6.372411417, mode=Mode.PRIVATE)
    fillet1_piece_8a = split(fillet1_piece_8a, bisect_by=Plane(origin=(-2.628893351, -3.1, 3), z_dir=(0, 1, 0)), keep=Keep.TOP, mode=Mode.PRIVATE)
    fillet1_piece_8a = split(fillet1_piece_8a, bisect_by=Plane(origin=(-2.628893351, -2.486498637, 2.708010903), z_dir=(0, -0.9922778767136677, 0.12403473458920848)), keep=Keep.TOP, mode=Mode.PRIVATE)
    with BuildSketch(Plane(origin=(4.76448426, -2.45, 3), x_dir=(0, -1, 0), z_dir=(-1, 0, 0))) as fillet1_piece_8b_section:
        with BuildLine():
            CenterArc((0.886322896, 0.97167458), FILLET1_R, 187.125016349, 69.205367851)
            Line((-0.105954981, 0.847639845), (-0.125800538, 0.84515915))
            Line((-0.125800538, 0.84515915), (-0.019845558, -0.002480695))
            Line((-0.019845558, -0.002480695), (0, -0.02))
            ThreePointArc((0, -0.02), (0.325, -0.02), (0.645273542, -0.019433492))
            Line((0.645273542, -0.019433492), (0.65, 0))
        make_face()
    fillet1_piece_8b = extrude(amount=9.52896852, mode=Mode.PRIVATE)
    fillet1_piece_8b = split(fillet1_piece_8b, bisect_by=Plane(origin=(-2.608642503, -2.45, 3.3864092), z_dir=(-0.9986295347562985, 0, 0.05233595621003828)), keep=Keep.TOP, mode=Mode.PRIVATE)
    fillet1_piece_8 = fillet1_piece_8a & fillet1_piece_8b
    add(fillet1_piece_8)

    # Sketch3 → Cut-Extrude1 (cut, up to next)
    with BuildSketch(Plane.XY.offset(3), mode=Mode.PRIVATE) as cut_extrude1_sk1:
        with Locations((-6.65790951, 0)):
            Circle(SKETCH3_R)
    cut_extrude1_tool1 = extrude(cut_extrude1_sk1.sketch, amount=-CUT_EXTRUDE1_REACH, mode=Mode.PRIVATE) & part.part
    cut_extrude1 = cut_extrude1_tool1.solids().sort_by_distance((-6.65791, 0, 3))[0]
    add(cut_extrude1, mode=Mode.SUBTRACT)

    # Mirror1: Cut-Extrude1 across plane
    add(cut_extrude1.mirror(Plane(origin=(0, 0, 0), x_dir=(0, 0, 1), z_dir=(1, 0, 0))), mode=Mode.SUBTRACT)

    # Fillet2
    fillet2_edges = [part.edges().sort_by_distance(p)[0] for p in [
        (10, -3.1, 1.5),
        (-10, -3.1, 1.5),
        (-10, 3.1, 1.5),
        (10, 3.1, 1.5),
    ]]
    fillet(fillet2_edges, radius=FILLET2_R)


solid = part.part
